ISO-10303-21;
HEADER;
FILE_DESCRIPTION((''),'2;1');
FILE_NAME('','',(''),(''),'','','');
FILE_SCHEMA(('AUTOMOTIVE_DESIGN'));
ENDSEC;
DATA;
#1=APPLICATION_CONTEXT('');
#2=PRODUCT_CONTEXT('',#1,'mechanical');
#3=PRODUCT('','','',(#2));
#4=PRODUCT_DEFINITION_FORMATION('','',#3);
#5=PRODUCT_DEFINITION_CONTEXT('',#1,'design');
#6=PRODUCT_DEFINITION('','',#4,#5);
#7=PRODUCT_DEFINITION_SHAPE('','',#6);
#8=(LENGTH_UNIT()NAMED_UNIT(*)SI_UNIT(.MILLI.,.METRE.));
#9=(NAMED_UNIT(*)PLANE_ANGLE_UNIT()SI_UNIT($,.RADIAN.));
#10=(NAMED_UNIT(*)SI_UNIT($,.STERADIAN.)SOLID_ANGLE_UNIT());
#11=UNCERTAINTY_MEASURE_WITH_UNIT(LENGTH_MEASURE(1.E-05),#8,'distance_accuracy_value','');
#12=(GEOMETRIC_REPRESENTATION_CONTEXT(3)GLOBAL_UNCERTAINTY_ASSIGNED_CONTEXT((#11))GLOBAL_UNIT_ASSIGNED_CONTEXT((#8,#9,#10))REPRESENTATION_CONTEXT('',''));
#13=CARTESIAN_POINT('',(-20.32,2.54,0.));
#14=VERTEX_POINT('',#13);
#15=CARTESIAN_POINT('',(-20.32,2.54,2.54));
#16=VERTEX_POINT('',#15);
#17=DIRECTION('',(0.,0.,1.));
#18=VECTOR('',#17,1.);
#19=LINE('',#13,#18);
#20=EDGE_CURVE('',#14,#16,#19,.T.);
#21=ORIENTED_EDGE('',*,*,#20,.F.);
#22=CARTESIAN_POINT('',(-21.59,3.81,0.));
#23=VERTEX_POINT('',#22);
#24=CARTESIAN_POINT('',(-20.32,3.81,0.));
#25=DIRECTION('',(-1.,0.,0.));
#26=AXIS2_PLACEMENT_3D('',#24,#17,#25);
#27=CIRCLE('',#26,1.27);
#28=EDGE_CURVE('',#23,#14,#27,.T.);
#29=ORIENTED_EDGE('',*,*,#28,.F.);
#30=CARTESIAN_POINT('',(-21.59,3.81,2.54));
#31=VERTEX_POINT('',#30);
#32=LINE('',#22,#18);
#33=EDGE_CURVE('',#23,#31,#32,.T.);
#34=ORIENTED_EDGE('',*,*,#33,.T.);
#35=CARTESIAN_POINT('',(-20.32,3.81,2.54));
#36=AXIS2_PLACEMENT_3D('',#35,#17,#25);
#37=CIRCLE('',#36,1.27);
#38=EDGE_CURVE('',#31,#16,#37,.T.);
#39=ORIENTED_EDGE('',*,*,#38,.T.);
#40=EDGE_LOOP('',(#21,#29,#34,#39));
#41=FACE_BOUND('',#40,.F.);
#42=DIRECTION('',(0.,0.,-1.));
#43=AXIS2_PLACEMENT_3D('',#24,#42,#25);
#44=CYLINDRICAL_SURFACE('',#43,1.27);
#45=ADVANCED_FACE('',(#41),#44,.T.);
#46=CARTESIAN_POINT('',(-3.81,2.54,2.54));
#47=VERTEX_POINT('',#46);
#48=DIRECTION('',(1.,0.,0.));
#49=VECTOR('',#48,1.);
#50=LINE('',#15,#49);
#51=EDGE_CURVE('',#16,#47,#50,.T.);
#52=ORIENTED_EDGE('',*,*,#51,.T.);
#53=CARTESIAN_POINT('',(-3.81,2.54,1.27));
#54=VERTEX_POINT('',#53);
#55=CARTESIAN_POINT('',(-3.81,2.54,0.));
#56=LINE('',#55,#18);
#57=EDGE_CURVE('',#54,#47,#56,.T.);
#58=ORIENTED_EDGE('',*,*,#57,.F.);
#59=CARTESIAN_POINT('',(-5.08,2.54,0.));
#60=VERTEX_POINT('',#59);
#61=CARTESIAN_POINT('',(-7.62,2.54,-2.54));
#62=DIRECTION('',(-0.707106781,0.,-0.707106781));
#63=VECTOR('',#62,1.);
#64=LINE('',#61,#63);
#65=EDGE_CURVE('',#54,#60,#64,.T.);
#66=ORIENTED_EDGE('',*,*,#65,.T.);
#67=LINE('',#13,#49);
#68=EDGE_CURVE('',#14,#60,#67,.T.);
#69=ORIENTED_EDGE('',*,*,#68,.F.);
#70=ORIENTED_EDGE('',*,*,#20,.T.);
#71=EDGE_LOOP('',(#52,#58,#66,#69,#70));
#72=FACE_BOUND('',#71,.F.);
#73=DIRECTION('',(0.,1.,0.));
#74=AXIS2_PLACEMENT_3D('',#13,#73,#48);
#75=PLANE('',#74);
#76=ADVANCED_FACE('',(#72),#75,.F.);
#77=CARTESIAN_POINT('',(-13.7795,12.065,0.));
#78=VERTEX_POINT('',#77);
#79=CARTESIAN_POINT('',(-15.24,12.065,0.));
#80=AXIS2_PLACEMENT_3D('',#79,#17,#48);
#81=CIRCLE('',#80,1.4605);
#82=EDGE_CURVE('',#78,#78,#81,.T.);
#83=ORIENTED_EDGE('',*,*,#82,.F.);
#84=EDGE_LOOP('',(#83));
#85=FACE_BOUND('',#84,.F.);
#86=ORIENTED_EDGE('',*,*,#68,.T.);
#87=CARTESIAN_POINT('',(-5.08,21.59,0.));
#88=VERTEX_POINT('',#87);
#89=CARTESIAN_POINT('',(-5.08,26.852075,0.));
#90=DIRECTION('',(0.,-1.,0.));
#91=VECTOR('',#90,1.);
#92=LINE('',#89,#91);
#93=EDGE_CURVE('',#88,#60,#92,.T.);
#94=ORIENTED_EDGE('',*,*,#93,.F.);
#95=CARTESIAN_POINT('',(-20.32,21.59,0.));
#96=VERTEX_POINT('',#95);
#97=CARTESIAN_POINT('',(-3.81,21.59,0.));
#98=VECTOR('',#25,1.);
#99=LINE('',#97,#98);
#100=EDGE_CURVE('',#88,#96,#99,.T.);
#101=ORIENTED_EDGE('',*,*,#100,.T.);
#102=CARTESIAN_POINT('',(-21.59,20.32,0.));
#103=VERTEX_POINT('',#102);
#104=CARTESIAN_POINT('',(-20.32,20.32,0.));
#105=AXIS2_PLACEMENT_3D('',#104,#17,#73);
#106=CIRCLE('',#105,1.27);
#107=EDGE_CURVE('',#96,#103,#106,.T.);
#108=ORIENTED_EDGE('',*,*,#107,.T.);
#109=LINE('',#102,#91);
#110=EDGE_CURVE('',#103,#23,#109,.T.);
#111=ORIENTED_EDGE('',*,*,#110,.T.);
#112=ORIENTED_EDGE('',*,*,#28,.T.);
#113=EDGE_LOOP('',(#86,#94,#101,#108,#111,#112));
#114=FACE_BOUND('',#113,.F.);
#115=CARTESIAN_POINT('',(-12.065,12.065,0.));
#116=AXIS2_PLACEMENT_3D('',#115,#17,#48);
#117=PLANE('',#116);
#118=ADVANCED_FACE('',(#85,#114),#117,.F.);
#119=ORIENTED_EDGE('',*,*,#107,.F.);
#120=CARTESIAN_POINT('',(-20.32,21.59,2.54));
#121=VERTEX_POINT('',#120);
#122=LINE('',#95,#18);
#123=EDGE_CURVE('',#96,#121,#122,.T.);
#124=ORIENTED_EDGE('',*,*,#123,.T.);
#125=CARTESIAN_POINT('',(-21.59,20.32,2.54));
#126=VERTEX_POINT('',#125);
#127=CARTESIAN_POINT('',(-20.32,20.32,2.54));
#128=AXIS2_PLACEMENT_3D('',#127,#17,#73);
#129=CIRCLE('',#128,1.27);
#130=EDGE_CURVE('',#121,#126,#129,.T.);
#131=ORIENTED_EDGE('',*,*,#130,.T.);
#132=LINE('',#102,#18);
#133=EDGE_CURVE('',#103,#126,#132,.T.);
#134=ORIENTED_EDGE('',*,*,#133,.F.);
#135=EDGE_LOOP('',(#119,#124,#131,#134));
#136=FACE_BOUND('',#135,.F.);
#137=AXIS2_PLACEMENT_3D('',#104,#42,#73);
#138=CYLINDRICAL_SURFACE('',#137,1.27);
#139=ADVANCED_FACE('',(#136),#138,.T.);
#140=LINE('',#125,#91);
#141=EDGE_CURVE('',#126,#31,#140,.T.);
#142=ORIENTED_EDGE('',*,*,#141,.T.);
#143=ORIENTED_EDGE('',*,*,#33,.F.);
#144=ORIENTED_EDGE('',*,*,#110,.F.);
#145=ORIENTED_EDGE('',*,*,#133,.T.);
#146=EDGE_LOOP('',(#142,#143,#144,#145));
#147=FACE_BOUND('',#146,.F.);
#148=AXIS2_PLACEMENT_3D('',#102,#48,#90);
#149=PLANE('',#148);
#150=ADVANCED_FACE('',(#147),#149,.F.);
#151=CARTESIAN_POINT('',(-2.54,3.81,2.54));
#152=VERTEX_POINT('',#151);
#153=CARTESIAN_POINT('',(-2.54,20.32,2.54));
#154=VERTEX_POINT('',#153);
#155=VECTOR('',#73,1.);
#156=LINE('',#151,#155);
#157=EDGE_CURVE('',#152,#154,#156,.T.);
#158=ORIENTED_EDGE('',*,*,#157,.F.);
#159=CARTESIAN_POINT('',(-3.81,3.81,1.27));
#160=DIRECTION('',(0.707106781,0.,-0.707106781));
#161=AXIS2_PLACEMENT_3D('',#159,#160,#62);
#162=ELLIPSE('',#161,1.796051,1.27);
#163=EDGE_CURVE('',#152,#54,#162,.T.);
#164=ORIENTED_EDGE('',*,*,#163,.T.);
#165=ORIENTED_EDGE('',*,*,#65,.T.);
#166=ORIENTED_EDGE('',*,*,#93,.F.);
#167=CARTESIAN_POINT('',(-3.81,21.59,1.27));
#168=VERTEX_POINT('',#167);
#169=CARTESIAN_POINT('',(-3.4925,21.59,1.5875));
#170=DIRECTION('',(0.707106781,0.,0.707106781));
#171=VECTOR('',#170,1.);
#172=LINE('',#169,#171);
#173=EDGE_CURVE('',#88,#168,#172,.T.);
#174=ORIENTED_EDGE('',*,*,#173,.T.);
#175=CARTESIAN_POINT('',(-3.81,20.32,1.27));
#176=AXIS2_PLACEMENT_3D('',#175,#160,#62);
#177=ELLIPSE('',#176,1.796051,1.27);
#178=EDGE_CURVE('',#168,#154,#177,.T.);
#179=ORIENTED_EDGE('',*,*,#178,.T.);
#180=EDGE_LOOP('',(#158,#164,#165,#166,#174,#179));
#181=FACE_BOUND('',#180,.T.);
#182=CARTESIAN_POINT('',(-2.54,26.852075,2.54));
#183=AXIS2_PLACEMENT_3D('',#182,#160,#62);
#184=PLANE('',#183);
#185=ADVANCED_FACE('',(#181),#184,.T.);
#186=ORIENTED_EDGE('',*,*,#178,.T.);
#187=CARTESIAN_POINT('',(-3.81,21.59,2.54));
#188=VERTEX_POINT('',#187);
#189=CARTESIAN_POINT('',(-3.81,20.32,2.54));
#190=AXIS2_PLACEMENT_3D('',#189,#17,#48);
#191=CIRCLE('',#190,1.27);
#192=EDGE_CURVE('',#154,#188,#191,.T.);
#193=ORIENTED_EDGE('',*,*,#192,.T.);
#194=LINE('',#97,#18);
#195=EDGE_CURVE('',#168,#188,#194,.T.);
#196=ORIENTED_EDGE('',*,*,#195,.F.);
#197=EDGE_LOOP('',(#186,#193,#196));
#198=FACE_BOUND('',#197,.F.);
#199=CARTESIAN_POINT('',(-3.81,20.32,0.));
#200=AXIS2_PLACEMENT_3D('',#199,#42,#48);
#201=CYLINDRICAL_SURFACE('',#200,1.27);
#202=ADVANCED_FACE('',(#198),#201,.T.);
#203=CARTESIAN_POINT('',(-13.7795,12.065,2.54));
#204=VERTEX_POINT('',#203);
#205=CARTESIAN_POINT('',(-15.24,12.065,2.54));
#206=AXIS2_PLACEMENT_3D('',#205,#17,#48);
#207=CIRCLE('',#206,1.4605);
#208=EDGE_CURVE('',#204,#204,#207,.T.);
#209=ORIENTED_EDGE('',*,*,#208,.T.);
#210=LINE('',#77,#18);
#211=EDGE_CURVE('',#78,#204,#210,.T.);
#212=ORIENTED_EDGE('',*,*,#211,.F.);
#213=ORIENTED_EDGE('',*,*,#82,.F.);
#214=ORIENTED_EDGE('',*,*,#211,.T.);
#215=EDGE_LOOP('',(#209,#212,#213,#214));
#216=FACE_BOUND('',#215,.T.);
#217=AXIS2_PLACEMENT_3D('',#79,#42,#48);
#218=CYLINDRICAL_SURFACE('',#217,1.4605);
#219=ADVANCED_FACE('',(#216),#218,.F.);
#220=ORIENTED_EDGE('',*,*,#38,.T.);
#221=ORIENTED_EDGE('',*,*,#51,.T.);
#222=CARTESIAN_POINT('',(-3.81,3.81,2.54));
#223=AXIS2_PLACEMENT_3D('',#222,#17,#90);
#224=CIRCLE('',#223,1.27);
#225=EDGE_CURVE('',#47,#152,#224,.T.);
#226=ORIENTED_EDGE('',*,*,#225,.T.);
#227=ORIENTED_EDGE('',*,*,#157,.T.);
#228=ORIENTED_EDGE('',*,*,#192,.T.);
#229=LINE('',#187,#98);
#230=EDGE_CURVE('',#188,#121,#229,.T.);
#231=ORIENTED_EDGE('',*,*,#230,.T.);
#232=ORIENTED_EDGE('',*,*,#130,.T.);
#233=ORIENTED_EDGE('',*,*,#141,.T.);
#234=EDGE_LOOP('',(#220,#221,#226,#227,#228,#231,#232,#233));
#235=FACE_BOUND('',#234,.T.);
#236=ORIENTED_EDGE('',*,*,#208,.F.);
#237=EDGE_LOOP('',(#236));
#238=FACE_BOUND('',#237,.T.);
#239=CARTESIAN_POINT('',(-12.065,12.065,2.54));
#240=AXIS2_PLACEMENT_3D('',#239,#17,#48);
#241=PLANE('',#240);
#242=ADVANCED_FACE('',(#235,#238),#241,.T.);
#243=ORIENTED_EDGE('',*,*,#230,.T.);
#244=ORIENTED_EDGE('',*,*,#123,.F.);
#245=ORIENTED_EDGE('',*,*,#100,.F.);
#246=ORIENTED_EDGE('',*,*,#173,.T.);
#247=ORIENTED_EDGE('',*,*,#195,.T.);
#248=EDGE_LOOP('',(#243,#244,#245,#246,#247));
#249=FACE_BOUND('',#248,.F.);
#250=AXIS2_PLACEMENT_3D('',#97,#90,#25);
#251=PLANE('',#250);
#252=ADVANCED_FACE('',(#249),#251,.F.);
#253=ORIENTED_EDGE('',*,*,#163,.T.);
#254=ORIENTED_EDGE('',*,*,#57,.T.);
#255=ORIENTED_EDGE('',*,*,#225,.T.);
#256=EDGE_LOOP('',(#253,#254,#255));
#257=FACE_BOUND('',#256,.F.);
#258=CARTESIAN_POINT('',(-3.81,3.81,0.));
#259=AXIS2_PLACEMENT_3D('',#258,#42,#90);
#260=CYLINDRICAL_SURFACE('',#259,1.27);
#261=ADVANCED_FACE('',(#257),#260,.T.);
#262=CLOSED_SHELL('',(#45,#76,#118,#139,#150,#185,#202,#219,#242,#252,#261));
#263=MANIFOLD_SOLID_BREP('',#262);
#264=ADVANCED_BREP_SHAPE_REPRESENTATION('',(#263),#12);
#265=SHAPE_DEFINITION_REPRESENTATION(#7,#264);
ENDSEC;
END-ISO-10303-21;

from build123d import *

# Parameters (mm, degrees)
F0_R        = 1.4605
F1_DEPTH    = 2.54
F2_T1_DEPTH = 29.5741495789


# Not quite as in the source:
# - a fillet or chamfer that OpenCascade refuses, or shapes differently, is made with other operations: its cross-section is extruded or revolved along the edge and cut away or added
# - a feature names something its author has since deleted; it is built from what else it names


with BuildPart() as f1:
    # F0 (on Top) → F1 (new body)
    with BuildSketch(Plane.XY):
        with BuildLine():
            Line((-20.32, 2.54), (-3.81, 2.54))
            ThreePointArc((-3.81, 2.54), (-2.9119743879, 2.9119743879), (-2.54, 3.81))
            Line((-2.54, 3.81), (-2.54, 20.32))
            ThreePointArc((-2.54, 20.32), (-2.9119743879, 21.2180256121), (-3.81, 21.59))
            Line((-3.81, 21.59), (-20.32, 21.59))
            ThreePointArc((-20.32, 21.59), (-21.2180256121, 21.2180256121), (-21.59, 20.32))
            Line((-21.59, 20.32), (-21.59, 3.81))
            ThreePointArc((-21.59, 3.81), (-21.2180256121, 2.9119743879), (-20.32, 2.54))
        make_face()
        with Locations((-15.24, 12.065)):
            Circle(F0_R, mode=Mode.SUBTRACT)
    extrude(amount=F1_DEPTH)

    # F2: chamfer of 2.54 on 1 edges, made by hand

    # F2_s2 → F2_t1 (cut)
    with BuildSketch(Plane.XZ.offset(-26.8520747894)):
        Polygon((-2.54, 2.54), (-5.08, 0), (-2.54, 0), align=None)
    extrude(amount=F2_T1_DEPTH, mode=Mode.SUBTRACT)


solid = f1.part
